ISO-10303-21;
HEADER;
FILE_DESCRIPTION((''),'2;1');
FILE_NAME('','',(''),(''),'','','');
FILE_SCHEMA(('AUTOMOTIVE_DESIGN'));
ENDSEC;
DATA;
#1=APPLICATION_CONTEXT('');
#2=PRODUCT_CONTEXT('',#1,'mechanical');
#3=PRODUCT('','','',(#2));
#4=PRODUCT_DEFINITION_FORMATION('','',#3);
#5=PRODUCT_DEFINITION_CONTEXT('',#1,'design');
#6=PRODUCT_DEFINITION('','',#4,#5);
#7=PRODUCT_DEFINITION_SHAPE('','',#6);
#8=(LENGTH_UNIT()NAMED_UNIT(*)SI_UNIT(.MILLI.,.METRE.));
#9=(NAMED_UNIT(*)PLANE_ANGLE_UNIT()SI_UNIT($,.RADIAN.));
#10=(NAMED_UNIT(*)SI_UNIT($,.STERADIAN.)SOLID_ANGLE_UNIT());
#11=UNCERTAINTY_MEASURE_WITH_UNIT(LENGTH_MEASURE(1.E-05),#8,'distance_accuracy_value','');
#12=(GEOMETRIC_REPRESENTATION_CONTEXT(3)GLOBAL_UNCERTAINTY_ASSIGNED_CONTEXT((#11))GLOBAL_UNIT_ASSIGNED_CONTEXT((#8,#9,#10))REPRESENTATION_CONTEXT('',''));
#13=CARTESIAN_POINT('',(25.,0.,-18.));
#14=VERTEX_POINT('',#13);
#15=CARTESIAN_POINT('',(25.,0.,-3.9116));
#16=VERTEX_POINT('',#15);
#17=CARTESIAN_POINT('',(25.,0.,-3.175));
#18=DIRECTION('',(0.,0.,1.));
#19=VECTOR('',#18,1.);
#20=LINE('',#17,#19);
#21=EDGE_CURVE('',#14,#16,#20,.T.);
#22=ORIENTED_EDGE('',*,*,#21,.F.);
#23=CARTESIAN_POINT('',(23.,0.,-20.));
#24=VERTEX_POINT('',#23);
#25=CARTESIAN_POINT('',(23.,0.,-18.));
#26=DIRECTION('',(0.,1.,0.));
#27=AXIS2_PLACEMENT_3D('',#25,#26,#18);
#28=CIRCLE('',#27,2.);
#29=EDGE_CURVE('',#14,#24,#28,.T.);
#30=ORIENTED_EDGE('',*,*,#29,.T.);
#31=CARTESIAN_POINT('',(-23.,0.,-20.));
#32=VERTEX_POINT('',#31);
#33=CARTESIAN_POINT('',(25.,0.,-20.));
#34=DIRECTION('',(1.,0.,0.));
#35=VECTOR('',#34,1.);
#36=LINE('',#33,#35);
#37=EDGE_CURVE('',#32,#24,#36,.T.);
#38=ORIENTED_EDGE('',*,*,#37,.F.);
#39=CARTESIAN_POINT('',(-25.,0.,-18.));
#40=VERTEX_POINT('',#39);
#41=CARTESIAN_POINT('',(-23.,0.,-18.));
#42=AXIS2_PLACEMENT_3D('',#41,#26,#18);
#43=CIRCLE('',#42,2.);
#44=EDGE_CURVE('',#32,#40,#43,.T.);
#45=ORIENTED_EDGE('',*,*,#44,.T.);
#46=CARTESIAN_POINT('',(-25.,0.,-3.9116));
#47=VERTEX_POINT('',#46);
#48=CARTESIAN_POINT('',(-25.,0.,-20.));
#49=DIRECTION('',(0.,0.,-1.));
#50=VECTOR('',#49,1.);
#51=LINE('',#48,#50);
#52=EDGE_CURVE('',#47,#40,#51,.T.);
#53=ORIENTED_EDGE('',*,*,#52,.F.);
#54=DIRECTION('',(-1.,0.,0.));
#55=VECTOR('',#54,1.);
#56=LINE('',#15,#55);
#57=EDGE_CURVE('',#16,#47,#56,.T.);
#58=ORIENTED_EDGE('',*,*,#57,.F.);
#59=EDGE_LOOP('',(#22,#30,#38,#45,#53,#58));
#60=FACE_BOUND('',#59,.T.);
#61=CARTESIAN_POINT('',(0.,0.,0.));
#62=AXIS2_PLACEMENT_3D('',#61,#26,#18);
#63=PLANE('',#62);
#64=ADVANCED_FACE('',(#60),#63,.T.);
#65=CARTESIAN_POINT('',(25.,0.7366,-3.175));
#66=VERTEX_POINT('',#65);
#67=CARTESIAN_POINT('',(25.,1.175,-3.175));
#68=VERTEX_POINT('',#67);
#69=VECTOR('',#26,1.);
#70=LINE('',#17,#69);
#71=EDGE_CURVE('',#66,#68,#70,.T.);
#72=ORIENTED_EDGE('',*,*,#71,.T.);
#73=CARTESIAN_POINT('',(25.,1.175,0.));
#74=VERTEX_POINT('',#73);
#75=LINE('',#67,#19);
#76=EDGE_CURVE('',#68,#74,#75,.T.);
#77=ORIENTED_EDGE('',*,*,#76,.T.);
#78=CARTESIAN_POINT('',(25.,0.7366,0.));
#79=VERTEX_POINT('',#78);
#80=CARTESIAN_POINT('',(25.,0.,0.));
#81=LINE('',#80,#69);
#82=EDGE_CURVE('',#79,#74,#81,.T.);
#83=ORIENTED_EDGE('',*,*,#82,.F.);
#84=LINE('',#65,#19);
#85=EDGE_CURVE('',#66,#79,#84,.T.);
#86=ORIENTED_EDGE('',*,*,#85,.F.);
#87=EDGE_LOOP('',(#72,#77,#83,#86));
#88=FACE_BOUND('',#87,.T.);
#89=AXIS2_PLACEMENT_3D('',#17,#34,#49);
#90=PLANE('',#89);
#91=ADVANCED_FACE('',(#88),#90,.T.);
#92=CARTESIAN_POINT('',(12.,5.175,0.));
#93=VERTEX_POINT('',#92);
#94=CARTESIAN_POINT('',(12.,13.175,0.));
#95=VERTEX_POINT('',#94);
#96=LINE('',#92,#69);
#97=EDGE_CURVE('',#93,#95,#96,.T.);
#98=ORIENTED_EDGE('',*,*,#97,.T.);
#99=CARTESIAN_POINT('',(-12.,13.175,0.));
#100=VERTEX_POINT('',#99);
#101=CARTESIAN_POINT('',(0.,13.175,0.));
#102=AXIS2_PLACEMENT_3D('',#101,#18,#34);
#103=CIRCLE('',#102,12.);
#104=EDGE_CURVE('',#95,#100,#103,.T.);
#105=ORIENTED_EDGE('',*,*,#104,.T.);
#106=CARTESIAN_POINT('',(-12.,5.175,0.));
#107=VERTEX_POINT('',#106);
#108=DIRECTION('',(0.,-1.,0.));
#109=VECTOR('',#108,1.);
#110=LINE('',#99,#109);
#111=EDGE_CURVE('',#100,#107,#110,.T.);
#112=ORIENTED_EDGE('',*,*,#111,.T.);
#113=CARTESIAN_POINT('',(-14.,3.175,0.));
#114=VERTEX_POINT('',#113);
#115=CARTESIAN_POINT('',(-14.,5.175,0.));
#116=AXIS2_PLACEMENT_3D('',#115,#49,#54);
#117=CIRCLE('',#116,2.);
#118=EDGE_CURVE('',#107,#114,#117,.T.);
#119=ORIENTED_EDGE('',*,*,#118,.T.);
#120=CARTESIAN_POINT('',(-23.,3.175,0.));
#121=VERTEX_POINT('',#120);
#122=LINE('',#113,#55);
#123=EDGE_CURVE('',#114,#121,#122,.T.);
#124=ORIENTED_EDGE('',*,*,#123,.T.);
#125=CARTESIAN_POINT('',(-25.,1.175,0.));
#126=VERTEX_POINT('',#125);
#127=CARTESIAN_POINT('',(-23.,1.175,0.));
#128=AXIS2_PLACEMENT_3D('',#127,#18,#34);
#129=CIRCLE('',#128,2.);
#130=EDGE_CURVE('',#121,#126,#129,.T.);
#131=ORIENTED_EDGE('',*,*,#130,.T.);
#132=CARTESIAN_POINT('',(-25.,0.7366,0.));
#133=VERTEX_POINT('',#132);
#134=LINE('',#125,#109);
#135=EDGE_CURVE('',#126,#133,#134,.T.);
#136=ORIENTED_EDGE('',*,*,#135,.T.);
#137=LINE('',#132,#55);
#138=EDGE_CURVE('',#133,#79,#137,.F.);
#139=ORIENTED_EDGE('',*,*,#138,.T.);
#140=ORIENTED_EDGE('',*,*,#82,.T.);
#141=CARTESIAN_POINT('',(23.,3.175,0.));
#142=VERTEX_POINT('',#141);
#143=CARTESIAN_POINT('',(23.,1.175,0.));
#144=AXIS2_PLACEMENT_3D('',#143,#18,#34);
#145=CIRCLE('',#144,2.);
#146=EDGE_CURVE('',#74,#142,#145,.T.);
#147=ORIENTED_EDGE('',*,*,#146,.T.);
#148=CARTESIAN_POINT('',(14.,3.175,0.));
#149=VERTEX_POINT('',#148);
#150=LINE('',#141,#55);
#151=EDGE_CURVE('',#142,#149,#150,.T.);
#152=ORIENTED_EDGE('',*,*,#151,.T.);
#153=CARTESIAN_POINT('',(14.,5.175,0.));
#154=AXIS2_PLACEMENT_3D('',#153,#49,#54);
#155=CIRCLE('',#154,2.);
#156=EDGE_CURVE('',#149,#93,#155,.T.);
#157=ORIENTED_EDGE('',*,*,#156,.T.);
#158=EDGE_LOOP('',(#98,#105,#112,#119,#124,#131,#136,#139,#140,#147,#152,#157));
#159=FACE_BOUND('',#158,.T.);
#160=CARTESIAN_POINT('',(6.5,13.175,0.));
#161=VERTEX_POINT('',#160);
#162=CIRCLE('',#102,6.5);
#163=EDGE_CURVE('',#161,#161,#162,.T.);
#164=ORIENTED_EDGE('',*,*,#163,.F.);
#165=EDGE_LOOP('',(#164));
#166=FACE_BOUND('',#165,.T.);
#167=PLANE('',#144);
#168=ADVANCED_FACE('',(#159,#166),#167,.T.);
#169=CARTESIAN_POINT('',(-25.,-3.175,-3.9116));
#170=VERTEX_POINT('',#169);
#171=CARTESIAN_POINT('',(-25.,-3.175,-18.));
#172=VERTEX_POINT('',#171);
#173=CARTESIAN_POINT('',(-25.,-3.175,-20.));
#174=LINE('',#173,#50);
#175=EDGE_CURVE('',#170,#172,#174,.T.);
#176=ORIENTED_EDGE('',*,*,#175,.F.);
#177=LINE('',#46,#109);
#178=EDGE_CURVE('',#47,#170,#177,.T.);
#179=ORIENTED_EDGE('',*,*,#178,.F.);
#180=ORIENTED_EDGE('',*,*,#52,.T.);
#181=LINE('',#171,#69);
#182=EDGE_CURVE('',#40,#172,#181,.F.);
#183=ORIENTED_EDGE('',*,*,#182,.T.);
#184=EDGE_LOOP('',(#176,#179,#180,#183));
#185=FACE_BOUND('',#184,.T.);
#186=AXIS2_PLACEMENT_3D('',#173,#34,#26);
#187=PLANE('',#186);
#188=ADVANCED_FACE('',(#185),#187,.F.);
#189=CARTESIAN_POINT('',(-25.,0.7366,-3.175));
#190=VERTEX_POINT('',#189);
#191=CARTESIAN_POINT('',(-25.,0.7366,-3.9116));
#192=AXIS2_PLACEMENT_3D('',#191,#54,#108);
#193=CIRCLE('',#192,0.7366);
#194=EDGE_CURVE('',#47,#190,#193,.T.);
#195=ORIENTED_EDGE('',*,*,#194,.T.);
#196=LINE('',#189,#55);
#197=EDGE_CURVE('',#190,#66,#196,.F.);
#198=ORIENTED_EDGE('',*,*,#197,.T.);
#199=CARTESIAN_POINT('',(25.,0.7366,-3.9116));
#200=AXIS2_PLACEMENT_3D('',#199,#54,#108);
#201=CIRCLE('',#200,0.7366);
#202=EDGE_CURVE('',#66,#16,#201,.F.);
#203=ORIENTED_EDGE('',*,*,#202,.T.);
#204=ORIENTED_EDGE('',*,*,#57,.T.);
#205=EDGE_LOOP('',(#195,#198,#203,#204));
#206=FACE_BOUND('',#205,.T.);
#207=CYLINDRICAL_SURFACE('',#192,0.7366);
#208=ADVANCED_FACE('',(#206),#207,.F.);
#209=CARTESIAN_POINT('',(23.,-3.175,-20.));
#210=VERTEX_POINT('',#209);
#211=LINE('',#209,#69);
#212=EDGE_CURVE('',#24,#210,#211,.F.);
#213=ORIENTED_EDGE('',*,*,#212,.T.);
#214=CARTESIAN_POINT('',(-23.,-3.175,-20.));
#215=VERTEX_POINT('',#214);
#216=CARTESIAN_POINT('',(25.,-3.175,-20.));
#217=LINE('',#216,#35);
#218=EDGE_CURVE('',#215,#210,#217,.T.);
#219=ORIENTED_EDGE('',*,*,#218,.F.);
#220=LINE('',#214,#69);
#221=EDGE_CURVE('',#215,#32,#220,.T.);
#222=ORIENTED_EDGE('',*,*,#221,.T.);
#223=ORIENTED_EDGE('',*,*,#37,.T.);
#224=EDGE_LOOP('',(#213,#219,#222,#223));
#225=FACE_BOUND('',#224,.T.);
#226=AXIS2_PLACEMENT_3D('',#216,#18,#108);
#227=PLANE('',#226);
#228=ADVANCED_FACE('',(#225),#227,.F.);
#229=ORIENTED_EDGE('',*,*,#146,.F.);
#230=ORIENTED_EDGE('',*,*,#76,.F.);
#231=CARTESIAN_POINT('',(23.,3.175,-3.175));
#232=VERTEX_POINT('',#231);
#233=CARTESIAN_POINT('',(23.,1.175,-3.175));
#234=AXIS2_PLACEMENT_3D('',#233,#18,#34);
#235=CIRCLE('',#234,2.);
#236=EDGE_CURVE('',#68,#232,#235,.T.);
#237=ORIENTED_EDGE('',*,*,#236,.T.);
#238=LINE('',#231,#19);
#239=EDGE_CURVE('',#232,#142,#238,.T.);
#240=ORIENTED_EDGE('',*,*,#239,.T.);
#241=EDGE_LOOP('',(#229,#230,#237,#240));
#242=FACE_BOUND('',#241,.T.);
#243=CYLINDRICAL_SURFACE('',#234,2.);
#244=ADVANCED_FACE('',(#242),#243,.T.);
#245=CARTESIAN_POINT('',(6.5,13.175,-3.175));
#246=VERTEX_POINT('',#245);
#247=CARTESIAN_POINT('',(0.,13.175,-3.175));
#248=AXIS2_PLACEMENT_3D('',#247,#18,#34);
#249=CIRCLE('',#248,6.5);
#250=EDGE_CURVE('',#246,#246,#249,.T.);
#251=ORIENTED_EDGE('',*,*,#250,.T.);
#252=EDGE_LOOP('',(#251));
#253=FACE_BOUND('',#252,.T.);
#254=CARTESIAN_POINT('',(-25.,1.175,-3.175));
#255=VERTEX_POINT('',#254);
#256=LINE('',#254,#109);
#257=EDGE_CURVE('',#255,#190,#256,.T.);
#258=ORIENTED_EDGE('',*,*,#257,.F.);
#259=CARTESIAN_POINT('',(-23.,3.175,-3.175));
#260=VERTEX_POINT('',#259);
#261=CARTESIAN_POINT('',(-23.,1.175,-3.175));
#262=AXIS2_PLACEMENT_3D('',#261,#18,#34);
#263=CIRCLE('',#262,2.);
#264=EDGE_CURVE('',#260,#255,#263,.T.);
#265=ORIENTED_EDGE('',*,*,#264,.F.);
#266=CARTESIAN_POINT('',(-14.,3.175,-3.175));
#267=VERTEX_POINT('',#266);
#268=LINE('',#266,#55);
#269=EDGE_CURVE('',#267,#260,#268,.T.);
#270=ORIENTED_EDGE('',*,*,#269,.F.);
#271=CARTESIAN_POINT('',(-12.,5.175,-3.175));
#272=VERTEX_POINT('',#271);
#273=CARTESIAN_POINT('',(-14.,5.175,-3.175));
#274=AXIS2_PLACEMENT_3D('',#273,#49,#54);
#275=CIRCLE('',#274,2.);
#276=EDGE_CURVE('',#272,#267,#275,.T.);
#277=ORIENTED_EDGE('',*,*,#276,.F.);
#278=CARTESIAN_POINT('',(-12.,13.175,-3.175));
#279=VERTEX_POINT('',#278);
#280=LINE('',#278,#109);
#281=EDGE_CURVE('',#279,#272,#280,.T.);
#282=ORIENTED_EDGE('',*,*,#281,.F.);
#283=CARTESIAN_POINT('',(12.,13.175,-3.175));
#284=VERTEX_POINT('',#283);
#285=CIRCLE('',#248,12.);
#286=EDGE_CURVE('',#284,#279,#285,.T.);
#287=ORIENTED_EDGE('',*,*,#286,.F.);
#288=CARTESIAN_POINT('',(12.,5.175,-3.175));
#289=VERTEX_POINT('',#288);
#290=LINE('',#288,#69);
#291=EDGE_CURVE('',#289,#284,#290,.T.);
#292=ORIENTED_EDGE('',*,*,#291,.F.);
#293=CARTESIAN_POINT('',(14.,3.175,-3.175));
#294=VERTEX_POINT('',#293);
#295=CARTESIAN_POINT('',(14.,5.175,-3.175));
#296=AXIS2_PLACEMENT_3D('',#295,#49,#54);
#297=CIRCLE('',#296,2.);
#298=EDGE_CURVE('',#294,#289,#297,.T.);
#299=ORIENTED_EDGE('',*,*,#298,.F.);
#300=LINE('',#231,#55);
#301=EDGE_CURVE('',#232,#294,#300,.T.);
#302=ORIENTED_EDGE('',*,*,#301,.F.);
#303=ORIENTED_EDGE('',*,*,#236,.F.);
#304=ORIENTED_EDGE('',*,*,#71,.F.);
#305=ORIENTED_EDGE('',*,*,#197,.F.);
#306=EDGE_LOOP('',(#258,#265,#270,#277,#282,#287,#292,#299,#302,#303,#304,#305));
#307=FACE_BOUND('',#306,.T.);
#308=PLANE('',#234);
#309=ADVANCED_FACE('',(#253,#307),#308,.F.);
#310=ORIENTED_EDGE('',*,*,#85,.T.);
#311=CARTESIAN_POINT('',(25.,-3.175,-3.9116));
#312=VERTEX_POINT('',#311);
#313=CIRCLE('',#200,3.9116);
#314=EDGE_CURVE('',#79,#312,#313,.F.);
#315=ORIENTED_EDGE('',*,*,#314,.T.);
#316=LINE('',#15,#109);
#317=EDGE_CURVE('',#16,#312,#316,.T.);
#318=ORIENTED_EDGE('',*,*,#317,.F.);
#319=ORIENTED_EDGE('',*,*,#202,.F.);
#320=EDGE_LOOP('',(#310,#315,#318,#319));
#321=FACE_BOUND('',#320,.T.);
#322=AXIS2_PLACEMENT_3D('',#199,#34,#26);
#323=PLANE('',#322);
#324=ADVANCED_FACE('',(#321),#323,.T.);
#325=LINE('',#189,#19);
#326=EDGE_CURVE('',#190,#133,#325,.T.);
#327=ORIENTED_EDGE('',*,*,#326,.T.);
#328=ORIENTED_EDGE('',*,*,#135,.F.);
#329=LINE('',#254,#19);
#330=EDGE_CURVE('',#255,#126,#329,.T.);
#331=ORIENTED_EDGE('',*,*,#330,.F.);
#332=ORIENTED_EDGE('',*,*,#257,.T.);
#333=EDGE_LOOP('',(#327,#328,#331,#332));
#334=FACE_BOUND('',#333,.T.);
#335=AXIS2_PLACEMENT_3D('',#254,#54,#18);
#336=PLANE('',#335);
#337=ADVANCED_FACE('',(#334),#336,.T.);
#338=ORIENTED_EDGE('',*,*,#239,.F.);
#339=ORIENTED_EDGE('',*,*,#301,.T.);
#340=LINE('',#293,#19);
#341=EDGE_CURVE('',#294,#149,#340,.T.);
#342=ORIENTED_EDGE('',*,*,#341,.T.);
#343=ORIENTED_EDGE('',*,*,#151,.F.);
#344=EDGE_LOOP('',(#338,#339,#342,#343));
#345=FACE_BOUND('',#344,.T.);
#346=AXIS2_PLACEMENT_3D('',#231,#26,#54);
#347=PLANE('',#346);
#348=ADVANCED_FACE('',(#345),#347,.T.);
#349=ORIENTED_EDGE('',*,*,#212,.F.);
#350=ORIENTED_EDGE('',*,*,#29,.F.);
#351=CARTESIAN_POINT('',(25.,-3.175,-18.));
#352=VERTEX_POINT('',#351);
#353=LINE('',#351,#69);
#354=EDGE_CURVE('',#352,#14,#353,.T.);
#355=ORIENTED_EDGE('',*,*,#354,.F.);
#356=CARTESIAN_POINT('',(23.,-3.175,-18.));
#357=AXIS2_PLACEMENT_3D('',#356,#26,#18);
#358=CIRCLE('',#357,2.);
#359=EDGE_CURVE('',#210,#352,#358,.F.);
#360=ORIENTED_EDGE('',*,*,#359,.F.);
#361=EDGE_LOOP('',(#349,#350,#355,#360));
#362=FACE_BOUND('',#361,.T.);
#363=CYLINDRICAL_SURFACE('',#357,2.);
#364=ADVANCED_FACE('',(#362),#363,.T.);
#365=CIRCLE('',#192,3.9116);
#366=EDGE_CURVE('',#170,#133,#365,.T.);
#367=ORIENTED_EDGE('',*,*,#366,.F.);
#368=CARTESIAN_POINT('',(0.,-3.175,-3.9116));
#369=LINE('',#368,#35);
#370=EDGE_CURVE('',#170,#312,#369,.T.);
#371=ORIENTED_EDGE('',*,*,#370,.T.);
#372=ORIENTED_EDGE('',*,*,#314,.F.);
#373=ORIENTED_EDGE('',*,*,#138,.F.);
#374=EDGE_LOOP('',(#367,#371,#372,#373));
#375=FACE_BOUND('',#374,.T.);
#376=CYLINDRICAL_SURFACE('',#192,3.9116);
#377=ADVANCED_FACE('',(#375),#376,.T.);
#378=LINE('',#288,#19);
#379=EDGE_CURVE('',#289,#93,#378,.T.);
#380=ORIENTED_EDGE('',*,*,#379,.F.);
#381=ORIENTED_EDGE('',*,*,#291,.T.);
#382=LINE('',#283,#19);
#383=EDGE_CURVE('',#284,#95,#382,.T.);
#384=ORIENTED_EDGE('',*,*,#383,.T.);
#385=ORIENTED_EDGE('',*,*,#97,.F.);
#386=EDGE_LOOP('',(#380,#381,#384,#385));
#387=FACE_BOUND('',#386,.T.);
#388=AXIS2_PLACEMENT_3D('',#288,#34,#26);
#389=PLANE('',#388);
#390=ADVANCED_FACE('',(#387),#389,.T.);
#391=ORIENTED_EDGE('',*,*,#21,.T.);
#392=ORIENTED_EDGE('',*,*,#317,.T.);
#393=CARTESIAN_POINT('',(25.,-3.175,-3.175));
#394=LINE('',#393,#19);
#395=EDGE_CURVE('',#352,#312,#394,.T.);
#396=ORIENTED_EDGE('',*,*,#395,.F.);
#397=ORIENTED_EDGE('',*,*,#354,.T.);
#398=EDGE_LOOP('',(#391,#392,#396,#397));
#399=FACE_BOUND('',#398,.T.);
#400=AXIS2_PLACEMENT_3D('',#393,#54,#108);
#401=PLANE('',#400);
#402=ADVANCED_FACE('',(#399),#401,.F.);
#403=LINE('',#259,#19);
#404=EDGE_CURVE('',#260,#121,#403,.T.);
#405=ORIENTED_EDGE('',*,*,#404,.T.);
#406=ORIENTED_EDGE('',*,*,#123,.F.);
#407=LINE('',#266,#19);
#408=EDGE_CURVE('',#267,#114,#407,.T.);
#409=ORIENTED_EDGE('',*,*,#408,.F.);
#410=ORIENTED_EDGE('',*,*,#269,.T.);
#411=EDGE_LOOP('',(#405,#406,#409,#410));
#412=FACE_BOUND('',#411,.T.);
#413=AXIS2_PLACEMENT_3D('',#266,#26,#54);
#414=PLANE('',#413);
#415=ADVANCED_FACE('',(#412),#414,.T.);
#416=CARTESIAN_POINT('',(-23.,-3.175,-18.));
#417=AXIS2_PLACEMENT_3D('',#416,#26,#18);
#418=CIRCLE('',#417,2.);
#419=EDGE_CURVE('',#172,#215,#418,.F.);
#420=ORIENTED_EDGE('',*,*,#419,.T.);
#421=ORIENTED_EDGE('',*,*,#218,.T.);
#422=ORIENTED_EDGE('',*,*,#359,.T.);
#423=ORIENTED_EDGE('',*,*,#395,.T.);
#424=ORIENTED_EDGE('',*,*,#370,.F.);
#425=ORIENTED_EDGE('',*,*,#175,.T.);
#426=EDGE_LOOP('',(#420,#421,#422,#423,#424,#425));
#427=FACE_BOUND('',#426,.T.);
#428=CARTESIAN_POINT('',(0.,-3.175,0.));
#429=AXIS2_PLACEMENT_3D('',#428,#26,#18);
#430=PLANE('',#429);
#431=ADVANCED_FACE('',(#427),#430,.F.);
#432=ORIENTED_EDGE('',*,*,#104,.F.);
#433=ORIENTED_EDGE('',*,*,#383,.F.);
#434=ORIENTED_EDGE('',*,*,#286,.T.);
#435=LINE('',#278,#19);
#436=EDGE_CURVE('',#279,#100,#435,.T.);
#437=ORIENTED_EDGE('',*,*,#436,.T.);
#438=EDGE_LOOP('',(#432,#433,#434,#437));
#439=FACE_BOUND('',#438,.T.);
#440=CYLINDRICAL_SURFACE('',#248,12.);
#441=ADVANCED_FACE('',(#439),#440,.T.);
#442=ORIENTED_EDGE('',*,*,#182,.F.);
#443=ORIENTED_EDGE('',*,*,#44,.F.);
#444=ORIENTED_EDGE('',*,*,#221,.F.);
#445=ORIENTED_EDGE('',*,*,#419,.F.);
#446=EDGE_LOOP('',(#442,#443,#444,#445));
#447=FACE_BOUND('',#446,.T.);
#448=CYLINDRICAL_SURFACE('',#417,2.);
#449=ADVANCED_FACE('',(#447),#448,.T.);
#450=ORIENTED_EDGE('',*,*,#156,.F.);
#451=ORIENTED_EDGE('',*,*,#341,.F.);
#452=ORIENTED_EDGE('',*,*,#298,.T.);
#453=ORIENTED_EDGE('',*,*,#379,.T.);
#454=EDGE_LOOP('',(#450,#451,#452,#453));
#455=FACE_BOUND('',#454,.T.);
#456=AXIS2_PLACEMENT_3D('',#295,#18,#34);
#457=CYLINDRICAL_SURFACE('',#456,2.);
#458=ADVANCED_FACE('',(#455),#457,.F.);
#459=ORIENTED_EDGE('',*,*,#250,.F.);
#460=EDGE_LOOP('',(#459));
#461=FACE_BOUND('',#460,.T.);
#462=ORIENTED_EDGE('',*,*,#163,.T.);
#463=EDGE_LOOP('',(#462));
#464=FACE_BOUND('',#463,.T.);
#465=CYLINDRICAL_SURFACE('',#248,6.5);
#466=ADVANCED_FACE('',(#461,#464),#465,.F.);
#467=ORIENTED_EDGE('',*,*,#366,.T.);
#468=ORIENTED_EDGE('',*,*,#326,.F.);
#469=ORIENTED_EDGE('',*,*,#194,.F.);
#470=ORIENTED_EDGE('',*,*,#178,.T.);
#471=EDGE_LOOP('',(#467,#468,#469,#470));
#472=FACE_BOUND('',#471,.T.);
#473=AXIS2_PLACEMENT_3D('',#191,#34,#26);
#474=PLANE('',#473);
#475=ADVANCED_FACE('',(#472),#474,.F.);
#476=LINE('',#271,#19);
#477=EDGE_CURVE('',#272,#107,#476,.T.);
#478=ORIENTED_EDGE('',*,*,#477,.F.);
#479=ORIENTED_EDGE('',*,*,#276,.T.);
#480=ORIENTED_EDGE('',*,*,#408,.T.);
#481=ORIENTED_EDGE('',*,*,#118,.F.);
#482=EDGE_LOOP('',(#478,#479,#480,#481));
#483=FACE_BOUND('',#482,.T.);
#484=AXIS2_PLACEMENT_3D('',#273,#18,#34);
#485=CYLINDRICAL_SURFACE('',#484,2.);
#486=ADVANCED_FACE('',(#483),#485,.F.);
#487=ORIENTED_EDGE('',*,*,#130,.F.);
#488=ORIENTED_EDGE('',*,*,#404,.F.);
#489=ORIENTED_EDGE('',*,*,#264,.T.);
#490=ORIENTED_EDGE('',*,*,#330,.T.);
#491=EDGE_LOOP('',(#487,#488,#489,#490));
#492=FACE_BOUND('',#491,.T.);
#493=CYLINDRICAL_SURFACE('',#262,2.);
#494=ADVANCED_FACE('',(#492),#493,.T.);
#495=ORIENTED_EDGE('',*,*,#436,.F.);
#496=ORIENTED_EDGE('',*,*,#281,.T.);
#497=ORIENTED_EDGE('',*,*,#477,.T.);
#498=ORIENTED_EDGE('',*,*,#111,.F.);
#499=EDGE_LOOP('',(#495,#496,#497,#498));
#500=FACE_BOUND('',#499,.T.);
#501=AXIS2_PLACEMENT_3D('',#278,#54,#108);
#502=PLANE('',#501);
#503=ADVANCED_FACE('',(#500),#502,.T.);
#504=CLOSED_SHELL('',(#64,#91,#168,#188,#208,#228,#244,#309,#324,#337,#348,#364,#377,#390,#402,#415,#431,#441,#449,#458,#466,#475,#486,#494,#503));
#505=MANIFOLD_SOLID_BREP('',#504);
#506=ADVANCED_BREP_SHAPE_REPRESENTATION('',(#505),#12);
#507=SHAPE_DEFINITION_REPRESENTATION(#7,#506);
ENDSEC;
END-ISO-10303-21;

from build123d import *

# Parameters (mm, degrees)
SKETCH1_R                    = 6.5
BASE_FLANGE1_DEPTH           = 3.175
EDGE_FLANGE1_STRIP_W         = 14.1732
EDGE_FLANGE1_STRIP_H         = 3.175
EDGE_FLANGE1_STRIP_CUT_DEPTH = 50
EDGE_FLANGE1_DEPTH           = 50
FILLET2_R                    = 2


# Sheet-metal steps are written as plain solids
with BuildPart() as part:
    # Sketch1 → Base-Flange1 (new body)
    with BuildSketch(Plane.XY):
        with BuildLine():
            Line((-25, 0), (25, 0))
            Line((25, 0), (25, 1.175))
            ThreePointArc((25, 1.175), (24.414213562, 2.589213562), (23, 3.175))
            Line((23, 3.175), (14, 3.175))
            ThreePointArc((14, 3.175), (12.585786438, 3.760786438), (12, 5.175))
            Line((12, 5.175), (12, 13.175))
            ThreePointArc((12, 13.175), (0, 25.175), (-12, 13.175))
            Line((-12, 13.175), (-12, 5.175))
            ThreePointArc((-12, 5.175), (-12.585786438, 3.760786438), (-14, 3.175))
            Line((-14, 3.175), (-23, 3.175))
            ThreePointArc((-23, 3.175), (-24.414213562, 2.589213562), (-25, 1.175))
            Line((-25, 1.175), (-25, 0))
        make_face()
        with Locations((0, 13.175)):
            Circle(SKETCH1_R, mode=Mode.SUBTRACT)
    extrude(amount=-BASE_FLANGE1_DEPTH)

    # Edge-Flange1 strip (across the edge) → Edge-Flange1 strip cut (cut)
    with BuildSketch(Plane(origin=(25, 0, -3.175), x_dir=(0, 1, 0), z_dir=(-1, 0, 0))):
        with Locations((-6.35, -1.5875)):
            Rectangle(EDGE_FLANGE1_STRIP_W, EDGE_FLANGE1_STRIP_H)
    extrude(amount=EDGE_FLANGE1_STRIP_CUT_DEPTH, mode=Mode.SUBTRACT)

    # Edge-Flange1 section (across the edge) → Edge-Flange1 (add)
    with BuildSketch(Plane(origin=(25, 0, -3.175), x_dir=(0, 1, 0), z_dir=(-1, 0, 0))):
        with BuildLine():
            Line((-3.175, 0.7366), (-3.175, 16.825))
            Line((-3.175, 16.825), (0, 16.825))
            Line((0, 16.825), (0, 0.7366))
            ThreePointArc((0, 0.7366), (0.215745145, 0.215745145), (0.7366, 0))
            Line((0.7366, 0), (0.7366, -3.175))
            ThreePointArc((0.7366, -3.175), (-2.029318885, -2.029318885), (-3.175, 0.7366))
        make_face()
    extrude(amount=EDGE_FLANGE1_DEPTH)

    # Fillet2
    fillet2_edges = [part.edges().sort_by_distance(p)[0] for p in [
        (25, -1.5875, -20),
        (-25, -1.5875, -20),
    ]]
    fillet(fillet2_edges, radius=FILLET2_R)


solid = part.part
